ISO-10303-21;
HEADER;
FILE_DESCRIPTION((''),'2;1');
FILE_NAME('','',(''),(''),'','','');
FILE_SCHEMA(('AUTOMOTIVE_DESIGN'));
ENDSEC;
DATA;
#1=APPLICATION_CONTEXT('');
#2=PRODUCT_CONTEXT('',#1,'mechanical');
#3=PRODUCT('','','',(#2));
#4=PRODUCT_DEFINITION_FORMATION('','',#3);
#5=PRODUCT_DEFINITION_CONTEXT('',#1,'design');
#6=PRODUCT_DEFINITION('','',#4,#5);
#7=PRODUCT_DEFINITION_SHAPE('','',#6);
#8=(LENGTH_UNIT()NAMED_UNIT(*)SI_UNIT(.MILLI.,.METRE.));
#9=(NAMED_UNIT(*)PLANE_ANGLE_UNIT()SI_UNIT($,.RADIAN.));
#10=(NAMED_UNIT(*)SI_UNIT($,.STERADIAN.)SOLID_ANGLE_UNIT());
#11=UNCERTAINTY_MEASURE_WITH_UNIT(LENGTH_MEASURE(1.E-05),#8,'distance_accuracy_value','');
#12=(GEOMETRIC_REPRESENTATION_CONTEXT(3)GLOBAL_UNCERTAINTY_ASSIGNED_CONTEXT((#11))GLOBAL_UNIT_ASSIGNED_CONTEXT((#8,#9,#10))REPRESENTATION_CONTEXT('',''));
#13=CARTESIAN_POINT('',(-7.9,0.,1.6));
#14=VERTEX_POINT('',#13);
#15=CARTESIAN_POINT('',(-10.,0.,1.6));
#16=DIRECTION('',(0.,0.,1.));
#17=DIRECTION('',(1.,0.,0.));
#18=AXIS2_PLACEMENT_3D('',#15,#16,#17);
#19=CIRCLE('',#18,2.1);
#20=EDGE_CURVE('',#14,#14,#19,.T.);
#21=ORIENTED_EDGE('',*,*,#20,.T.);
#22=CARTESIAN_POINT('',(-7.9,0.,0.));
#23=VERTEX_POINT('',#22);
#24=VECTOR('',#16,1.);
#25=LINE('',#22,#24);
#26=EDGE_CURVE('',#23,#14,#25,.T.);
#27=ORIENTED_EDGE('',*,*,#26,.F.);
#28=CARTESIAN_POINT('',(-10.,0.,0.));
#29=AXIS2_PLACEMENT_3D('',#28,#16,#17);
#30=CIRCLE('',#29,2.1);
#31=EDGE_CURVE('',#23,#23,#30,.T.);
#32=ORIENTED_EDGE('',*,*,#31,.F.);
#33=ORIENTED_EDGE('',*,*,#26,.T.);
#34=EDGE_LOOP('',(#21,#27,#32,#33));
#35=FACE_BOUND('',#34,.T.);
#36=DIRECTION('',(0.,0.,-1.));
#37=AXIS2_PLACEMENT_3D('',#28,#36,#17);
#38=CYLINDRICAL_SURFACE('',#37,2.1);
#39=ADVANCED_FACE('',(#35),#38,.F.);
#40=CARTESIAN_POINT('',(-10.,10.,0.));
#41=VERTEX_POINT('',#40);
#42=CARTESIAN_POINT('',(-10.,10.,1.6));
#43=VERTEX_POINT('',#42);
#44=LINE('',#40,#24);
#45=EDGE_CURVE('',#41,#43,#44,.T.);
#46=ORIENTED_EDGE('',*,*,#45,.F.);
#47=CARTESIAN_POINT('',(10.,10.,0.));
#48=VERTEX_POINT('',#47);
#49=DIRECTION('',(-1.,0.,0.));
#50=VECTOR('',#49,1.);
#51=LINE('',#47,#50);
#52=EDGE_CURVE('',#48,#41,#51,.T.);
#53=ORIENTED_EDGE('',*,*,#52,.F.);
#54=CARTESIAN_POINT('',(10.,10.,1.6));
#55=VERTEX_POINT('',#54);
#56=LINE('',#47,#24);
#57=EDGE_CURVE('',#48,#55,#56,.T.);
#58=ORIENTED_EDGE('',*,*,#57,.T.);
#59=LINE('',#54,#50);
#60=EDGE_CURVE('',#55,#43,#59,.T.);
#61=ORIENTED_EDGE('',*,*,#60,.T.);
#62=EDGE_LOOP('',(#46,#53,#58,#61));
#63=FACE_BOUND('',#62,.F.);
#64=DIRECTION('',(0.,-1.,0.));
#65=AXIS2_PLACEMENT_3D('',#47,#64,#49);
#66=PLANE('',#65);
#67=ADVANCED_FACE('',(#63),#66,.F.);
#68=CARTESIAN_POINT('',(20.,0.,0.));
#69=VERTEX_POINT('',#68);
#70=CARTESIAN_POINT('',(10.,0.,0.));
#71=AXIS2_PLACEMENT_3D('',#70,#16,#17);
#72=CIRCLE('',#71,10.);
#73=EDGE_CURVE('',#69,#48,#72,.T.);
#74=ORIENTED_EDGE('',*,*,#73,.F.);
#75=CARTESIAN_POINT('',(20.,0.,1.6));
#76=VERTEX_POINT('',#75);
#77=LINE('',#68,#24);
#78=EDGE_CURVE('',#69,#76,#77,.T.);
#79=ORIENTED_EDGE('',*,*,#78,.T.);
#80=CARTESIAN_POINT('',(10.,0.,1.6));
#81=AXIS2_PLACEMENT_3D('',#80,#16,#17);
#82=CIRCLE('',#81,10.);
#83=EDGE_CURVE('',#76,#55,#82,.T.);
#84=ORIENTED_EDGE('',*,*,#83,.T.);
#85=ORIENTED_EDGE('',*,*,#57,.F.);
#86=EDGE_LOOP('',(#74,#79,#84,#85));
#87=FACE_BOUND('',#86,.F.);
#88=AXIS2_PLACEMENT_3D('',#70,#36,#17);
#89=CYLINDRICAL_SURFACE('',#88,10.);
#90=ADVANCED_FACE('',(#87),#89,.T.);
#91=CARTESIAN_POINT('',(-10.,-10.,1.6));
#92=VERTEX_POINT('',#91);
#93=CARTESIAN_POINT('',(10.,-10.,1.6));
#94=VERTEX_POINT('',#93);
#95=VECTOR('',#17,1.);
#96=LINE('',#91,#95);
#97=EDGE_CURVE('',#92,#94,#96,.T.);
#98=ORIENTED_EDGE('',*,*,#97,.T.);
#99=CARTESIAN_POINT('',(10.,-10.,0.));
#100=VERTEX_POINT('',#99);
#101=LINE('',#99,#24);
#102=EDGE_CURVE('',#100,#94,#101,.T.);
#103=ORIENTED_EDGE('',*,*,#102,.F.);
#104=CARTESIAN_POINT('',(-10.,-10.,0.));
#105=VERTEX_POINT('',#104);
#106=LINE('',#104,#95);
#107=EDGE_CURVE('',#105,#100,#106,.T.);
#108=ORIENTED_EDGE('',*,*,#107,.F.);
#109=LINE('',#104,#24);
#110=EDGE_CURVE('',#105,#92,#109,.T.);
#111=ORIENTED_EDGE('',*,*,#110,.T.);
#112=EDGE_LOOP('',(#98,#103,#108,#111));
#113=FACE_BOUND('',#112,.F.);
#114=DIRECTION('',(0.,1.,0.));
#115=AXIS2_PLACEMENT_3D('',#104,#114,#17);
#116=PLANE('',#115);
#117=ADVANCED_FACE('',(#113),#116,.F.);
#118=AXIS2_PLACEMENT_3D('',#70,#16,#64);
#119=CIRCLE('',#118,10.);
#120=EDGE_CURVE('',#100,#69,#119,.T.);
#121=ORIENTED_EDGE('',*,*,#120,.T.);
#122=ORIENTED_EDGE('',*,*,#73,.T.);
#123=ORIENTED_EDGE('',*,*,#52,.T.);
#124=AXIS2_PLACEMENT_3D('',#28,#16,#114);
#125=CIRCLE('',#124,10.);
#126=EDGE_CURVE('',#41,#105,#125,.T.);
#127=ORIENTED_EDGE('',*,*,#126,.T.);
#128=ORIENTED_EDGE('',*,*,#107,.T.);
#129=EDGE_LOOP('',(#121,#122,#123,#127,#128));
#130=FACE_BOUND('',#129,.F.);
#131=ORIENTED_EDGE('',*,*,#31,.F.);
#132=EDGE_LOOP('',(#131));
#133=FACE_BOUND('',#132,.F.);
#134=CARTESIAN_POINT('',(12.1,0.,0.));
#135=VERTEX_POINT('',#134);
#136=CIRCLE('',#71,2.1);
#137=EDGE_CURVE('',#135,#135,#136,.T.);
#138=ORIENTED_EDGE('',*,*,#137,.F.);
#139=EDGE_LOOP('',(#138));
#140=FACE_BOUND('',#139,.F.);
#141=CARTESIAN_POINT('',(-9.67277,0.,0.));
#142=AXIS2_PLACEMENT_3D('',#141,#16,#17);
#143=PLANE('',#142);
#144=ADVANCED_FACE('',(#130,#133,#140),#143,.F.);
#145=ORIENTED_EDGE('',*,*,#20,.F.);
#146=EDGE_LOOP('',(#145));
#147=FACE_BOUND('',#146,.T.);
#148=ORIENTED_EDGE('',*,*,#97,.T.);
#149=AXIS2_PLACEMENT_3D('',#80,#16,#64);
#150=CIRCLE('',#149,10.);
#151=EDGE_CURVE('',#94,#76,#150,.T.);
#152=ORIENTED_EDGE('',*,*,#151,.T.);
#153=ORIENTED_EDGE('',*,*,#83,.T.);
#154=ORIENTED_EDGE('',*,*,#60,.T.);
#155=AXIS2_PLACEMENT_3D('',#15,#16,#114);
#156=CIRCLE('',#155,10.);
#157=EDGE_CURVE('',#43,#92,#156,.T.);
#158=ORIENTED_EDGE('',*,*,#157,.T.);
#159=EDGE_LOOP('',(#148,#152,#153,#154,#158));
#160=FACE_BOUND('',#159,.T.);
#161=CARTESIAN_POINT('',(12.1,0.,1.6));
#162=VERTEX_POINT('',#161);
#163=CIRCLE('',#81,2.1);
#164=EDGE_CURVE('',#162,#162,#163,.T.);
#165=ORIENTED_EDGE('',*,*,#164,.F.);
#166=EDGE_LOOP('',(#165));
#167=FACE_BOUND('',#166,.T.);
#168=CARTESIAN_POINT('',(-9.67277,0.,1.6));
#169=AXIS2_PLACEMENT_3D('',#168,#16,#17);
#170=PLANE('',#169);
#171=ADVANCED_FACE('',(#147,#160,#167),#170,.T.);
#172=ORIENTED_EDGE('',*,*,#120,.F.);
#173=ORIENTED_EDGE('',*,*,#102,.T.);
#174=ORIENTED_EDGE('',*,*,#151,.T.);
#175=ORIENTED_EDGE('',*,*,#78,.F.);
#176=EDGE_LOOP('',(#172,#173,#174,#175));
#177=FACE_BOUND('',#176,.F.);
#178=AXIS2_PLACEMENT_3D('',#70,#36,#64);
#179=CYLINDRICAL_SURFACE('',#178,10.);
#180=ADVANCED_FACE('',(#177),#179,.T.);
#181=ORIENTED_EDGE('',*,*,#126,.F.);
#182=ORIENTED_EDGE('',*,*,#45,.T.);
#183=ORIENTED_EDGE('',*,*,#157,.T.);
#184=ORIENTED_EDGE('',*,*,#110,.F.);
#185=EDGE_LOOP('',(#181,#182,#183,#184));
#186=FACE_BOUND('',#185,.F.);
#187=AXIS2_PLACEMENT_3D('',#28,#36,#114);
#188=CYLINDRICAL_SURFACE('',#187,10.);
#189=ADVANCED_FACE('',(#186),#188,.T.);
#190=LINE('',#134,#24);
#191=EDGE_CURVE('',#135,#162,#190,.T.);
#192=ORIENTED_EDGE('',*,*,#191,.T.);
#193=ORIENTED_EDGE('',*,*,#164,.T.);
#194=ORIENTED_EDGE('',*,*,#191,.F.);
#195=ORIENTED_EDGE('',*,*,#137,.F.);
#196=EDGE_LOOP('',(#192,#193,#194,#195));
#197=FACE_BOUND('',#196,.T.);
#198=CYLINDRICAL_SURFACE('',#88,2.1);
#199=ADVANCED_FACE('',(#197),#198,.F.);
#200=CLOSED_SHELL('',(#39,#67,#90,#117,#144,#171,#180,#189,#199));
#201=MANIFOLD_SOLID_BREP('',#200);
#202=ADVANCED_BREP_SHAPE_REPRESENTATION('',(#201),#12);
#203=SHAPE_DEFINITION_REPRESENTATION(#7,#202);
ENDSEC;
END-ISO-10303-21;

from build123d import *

# Parameters (mm, degrees)
F0_R     = 2.1
F1_DEPTH = 1.6


# Not quite as in the source:
# - a feature names something its author has since deleted; it is built from what else it names


with BuildPart() as f1:
    # F0 (on Top) → F1 (new body)
    with BuildSketch(Plane.XY):
        with BuildLine():
            ThreePointArc((-10, -10), (-2.9289321881, -7.0710678119), (0, 0))
            ThreePointArc((0, 0), (-2.9289321881, 7.0710678119), (-10, 10))
            ThreePointArc((-10, 10), (-20, 0), (-10, -10))
        make_face()
        with Locations((-10, 0)):
            Circle(F0_R, mode=Mode.SUBTRACT)
        with BuildLine():
            ThreePointArc((10, 10), (2.9289321881, 7.0710678119), (0, 0))
            ThreePointArc((0, 0), (2.9289321881, -7.0710678119), (10, -10))
            ThreePointArc((10, -10), (17.0710678119, -7.0710678119), (20, 0))
            ThreePointArc((20, 0), (17.0710678119, 7.0710678119), (10, 10))
        make_face()
        with Locations((10, 0)):
            Circle(F0_R, mode=Mode.SUBTRACT)
        with BuildLine():
            ThreePointArc((-10, 10), (-2.9289321881, 7.0710678119), (0, 0))
            ThreePointArc((0, 0), (2.9289321881, 7.0710678119), (10, 10))
            Line((10, 10), (-10, 10))
        make_face()
        with BuildLine():
            ThreePointArc((10, -10), (2.9289321881, -7.0710678119), (0, 0))
            ThreePointArc((0, 0), (-2.9289321881, -7.0710678119), (-10, -10))
            Line((-10, -10), (10, -10))
        make_face()
    extrude(amount=F1_DEPTH)


solid = f1.part
